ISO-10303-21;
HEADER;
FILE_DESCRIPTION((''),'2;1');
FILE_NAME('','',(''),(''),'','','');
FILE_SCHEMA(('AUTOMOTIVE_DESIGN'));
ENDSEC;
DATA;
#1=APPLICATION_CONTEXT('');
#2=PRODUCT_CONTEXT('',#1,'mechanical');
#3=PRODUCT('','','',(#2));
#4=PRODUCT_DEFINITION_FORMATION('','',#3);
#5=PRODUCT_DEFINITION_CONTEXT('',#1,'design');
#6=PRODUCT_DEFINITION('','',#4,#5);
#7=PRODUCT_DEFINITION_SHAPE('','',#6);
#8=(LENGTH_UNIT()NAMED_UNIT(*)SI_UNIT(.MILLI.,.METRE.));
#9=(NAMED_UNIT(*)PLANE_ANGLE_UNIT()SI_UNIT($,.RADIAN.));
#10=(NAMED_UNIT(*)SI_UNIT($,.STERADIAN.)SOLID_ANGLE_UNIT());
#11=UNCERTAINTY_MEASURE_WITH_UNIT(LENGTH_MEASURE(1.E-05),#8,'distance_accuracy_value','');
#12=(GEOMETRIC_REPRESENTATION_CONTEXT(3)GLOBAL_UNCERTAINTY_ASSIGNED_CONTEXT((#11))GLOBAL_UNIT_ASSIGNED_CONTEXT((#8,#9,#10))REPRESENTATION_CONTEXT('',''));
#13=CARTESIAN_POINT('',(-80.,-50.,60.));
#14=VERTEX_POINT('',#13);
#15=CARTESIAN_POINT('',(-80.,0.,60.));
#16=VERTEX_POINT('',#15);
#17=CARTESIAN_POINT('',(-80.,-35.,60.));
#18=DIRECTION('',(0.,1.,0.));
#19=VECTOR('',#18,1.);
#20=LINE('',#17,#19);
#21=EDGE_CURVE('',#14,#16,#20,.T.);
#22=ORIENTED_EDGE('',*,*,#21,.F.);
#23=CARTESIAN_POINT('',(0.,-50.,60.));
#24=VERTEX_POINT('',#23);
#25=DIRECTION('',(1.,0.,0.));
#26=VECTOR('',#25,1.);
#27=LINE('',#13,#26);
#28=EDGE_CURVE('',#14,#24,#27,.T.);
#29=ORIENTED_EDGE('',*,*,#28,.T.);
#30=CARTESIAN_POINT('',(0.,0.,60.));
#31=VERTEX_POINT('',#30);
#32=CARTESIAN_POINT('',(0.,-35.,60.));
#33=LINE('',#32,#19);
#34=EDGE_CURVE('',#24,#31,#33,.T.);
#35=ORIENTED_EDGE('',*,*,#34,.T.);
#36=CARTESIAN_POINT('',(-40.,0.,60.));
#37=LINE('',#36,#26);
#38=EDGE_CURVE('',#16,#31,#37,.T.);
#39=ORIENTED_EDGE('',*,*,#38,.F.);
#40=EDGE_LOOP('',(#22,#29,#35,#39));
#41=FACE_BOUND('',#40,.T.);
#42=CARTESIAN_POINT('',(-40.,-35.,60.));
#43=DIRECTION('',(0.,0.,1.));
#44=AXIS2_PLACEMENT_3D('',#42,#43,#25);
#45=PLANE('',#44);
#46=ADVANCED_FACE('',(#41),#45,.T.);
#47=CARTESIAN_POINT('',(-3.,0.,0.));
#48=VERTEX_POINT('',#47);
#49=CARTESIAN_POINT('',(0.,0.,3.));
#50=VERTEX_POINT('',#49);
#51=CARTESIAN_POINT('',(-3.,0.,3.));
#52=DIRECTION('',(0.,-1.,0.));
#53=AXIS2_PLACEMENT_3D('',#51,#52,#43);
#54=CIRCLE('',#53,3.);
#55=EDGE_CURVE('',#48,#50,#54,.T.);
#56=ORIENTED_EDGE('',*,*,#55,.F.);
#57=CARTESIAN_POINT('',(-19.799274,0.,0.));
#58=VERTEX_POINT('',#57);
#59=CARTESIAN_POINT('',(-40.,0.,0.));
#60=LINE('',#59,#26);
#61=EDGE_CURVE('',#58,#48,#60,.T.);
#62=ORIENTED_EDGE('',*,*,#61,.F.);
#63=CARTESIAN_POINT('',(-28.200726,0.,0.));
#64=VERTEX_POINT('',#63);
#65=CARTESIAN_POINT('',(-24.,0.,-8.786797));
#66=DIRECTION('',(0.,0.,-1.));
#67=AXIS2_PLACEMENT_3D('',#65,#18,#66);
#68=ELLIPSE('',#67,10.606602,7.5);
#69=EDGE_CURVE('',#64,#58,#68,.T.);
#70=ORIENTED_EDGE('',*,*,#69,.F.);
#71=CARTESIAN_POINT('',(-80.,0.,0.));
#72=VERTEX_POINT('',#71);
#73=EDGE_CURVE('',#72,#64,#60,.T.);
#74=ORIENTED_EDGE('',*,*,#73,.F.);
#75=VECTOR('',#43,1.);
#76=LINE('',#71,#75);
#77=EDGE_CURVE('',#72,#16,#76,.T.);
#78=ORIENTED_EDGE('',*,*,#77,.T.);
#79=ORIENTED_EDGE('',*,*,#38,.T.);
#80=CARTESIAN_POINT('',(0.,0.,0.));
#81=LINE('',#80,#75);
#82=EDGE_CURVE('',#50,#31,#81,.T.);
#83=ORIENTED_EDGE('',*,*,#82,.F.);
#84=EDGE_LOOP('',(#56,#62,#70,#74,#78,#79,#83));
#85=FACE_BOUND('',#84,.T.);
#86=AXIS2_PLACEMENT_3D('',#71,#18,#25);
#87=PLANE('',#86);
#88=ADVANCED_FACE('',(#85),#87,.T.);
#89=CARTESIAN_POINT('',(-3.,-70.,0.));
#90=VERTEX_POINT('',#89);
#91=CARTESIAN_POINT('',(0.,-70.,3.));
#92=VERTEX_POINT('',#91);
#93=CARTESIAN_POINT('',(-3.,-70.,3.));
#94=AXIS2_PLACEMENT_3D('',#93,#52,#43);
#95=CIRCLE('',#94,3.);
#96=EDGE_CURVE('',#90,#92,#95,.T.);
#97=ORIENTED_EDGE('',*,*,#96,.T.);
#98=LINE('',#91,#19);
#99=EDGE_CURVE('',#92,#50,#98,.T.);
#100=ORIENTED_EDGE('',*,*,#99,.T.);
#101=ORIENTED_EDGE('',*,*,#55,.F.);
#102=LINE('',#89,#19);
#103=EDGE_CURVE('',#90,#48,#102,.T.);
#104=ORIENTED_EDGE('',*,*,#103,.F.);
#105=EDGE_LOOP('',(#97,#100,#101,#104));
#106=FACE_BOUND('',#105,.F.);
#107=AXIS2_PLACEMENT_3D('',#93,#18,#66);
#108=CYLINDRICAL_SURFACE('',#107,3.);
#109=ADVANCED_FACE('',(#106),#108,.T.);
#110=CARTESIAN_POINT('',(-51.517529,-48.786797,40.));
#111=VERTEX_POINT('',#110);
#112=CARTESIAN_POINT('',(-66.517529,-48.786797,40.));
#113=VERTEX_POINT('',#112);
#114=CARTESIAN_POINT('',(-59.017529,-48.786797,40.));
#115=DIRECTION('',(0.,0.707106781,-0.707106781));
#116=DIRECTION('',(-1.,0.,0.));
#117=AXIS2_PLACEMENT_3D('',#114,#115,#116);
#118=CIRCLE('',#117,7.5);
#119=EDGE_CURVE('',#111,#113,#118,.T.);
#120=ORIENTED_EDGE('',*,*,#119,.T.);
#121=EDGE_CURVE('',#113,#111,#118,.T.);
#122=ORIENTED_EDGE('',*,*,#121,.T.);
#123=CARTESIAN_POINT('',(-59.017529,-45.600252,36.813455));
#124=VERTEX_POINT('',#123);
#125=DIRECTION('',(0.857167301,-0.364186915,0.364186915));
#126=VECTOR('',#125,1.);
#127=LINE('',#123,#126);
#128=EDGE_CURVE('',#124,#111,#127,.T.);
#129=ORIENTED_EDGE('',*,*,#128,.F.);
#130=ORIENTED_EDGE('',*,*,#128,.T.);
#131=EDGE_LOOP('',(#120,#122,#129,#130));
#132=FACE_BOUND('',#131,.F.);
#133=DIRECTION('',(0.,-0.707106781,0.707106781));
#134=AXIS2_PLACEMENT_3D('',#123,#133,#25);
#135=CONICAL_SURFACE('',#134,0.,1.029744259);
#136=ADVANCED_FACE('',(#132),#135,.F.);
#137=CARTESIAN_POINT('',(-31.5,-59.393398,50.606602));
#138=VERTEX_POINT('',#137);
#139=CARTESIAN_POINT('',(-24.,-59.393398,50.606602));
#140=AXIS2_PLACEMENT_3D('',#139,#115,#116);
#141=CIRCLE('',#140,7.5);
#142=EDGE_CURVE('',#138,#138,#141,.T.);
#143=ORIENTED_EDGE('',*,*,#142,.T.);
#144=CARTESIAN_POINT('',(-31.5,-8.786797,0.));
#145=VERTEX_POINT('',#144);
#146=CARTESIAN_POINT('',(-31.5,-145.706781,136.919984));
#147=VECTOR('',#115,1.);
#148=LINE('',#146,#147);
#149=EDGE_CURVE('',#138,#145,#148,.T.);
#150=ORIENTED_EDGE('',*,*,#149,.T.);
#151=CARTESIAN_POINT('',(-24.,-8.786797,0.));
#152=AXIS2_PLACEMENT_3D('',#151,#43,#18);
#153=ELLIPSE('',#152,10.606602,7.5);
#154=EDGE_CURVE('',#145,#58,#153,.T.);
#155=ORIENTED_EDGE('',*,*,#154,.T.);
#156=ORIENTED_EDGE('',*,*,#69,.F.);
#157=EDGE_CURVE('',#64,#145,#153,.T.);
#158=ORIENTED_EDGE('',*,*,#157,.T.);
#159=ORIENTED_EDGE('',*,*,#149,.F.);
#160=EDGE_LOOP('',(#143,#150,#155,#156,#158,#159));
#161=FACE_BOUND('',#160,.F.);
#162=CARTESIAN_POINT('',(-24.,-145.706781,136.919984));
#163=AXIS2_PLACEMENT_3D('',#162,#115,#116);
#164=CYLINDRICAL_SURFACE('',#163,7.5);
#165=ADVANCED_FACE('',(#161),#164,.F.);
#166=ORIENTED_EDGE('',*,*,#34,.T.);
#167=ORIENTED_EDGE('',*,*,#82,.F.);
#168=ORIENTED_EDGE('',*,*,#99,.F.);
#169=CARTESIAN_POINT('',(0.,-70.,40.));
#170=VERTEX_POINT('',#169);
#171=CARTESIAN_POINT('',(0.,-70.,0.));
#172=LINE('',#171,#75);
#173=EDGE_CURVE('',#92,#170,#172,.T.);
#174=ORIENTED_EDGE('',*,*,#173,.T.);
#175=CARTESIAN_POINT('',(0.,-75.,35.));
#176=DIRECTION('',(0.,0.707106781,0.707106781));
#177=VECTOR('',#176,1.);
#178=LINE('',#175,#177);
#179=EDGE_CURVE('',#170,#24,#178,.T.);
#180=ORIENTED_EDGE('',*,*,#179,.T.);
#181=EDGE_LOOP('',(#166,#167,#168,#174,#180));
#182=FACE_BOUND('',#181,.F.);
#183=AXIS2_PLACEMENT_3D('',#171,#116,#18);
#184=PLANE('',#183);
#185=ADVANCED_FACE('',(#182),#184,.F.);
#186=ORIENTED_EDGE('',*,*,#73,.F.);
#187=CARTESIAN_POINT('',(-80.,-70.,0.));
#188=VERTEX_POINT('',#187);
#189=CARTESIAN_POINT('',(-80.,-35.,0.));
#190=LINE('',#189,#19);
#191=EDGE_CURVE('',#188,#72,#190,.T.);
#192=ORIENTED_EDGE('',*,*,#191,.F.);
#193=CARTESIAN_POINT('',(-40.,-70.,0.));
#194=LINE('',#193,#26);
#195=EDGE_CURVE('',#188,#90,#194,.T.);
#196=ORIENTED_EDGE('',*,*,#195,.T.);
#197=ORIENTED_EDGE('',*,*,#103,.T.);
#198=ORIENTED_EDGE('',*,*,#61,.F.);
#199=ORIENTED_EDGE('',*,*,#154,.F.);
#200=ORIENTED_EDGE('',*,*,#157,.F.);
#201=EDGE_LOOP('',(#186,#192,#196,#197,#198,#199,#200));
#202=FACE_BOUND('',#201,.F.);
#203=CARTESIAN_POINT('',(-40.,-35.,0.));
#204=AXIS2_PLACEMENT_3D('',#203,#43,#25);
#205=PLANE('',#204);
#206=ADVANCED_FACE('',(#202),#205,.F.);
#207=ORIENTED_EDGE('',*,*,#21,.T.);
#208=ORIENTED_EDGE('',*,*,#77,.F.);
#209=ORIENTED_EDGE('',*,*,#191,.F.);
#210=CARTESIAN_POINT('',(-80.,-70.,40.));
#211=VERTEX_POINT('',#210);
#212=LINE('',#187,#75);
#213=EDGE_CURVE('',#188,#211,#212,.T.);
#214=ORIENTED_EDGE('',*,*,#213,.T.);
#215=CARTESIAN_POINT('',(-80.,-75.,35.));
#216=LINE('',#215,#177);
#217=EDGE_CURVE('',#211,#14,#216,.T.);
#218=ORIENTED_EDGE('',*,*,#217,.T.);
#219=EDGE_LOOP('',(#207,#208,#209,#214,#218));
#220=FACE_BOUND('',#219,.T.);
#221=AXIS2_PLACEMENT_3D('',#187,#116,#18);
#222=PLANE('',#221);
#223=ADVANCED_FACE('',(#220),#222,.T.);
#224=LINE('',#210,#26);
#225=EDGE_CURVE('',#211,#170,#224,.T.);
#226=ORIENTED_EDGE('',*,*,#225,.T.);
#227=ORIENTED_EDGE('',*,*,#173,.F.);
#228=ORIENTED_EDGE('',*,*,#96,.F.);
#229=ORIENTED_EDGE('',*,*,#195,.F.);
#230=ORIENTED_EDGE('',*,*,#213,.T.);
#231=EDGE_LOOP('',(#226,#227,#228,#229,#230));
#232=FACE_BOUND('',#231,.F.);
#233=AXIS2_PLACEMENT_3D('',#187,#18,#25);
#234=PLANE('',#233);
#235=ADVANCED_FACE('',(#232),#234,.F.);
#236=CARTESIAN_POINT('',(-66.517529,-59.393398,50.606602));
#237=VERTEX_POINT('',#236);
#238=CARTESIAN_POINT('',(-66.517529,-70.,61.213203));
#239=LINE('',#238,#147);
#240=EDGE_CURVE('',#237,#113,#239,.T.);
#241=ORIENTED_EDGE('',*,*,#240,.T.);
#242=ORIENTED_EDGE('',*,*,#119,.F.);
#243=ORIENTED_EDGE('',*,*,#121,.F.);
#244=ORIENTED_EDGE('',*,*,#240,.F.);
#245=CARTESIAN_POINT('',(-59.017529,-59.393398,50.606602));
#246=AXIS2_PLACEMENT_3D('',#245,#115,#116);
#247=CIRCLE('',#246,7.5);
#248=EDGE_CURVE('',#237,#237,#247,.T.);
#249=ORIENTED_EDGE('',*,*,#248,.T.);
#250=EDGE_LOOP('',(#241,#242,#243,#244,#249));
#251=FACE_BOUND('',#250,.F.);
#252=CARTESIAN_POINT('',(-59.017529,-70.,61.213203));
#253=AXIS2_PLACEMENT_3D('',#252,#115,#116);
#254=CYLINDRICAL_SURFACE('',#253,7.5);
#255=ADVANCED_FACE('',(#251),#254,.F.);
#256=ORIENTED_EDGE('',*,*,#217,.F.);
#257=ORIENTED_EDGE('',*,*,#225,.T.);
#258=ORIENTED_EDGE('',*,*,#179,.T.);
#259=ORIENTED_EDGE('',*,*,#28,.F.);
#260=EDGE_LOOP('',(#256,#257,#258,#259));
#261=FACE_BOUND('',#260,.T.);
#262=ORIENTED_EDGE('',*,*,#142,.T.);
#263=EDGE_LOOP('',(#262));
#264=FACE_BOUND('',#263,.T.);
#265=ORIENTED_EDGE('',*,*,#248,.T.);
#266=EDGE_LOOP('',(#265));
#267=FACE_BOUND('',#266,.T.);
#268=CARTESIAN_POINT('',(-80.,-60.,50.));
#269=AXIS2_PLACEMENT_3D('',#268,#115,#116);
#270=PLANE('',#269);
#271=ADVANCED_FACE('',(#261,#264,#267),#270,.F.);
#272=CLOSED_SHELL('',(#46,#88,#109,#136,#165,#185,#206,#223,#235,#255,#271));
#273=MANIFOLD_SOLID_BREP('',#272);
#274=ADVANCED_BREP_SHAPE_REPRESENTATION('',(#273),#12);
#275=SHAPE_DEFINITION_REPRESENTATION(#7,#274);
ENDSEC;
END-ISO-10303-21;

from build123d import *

# Parameters (mm, degrees)
F0_W     = 80
F0_H     = 70
F1_DEPTH = 60
F2_SIZE  = 20
F4_D     = 15
F6_D     = 15
F6_DEPTH = 15
F6_TIP   = 4.5064546427
F7_R     = 3


with BuildPart() as f1:
    # F0 (on Top) → F1 (new body)
    with BuildSketch(Plane.XY):
        with Locations((-40, -35)):
            Rectangle(F0_W, F0_H)
    extrude(amount=F1_DEPTH)

    # F2
    f2_edges = [f1.edges().sort_by_distance(p)[0] for p in [
        (-40, -70, 60),
    ]]
    chamfer(f2_edges, length=F2_SIZE)

    # F4 (through all)
    with Locations(Plane(origin=(0, -55, 55), x_dir=(1, 0, 0), z_dir=(0, -0.7071067812, 0.7071067812))):
        with Locations((-24, -6.2132034356)):
            Hole(F4_D / 2)

    # F6
    with Locations(Plane(origin=(0, -55, 55), x_dir=(1, 0, 0), z_dir=(0, -0.7071067812, 0.7071067812))):
        with Locations((-59.0175294898, -6.2132034356)):
            Hole(F6_D / 2, depth=F6_DEPTH)
            with Locations((0, 0, -(F6_DEPTH + F6_TIP / 2))):  # 118° drill point
                Cone(0, F6_D / 2, F6_TIP, mode=Mode.SUBTRACT)

    # F7
    f7_edges = [f1.edges().sort_by_distance(p)[0] for p in [
        (0, -35, 0),
    ]]
    fillet(f7_edges, radius=F7_R)


solid = f1.part
